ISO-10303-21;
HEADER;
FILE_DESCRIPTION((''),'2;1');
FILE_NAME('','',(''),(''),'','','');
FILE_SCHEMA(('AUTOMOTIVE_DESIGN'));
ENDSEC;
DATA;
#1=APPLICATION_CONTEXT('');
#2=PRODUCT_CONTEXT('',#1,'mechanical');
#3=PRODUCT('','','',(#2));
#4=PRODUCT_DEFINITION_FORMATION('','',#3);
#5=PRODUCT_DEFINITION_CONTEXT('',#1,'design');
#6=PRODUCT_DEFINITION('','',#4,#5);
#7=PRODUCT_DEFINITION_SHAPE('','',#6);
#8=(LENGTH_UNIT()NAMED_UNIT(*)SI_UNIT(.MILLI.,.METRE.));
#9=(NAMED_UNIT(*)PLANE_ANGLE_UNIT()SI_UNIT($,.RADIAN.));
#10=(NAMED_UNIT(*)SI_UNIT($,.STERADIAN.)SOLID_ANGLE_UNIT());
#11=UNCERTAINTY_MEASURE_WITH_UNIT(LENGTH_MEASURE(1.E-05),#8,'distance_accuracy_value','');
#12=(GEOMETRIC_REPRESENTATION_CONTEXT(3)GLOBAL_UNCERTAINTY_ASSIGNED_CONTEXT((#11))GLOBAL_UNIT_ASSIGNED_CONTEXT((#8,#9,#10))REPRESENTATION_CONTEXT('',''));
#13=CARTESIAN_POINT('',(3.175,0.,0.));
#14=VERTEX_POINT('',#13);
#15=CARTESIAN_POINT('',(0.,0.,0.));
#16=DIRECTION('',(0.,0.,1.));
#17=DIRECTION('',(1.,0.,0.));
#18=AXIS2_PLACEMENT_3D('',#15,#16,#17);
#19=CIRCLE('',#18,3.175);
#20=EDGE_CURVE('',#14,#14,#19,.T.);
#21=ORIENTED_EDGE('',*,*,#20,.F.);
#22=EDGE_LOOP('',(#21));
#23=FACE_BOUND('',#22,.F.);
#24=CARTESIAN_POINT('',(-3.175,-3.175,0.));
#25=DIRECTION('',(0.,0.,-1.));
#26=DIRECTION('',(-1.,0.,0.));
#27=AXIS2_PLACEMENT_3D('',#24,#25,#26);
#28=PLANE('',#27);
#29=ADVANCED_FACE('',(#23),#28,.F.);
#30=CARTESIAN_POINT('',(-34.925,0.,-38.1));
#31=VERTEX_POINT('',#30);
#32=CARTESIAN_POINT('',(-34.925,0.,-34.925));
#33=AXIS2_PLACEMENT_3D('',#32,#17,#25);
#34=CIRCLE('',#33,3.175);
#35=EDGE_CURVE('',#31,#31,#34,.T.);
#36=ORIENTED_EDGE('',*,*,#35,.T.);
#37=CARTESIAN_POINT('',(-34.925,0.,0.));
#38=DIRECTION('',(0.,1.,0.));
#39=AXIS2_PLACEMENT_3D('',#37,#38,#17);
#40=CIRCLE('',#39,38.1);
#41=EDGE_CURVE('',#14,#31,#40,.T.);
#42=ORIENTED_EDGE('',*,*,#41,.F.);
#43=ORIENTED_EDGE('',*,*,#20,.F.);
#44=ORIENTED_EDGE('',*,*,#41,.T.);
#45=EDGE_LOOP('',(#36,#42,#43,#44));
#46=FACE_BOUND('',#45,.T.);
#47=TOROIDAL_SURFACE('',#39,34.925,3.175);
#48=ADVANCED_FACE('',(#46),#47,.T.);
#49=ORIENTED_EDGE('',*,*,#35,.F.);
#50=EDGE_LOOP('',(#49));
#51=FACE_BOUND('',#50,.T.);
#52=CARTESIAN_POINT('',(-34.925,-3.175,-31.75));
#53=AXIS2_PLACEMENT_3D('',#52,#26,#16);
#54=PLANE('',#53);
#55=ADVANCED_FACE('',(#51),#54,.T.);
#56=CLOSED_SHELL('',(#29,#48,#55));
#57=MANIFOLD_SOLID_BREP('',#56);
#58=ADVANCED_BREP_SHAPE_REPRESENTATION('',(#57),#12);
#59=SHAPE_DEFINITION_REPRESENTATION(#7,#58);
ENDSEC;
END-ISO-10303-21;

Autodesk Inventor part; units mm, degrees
ref_plane "XY Plane" through (0, 0, 0) normal (0, 0, 1) x (1, 0, 0)
sketch "Sketch2" plane through (0, 0, 0) normal (0, 0, 1) x (1, 0, 0)
  circle A0 centre (0, 0) radius 3.175
extrude "Extrusion1" add sketch "Sketch2" against normal blind 49.8728
ref_plane "Work Plane1" through (-3.175, 0, 0) normal (1, 0, 0) x (0, 1, 0)
sketch "Sketch3" plane through (-3.175, 0, 0) normal (1, 0, 0) x (0, 1, 0)
  line L0 (-3.175, -49.8728) -> (3.175, -49.8728) projected
  line L1 (-3.175, 0) -> (3.175, 0) projected
  point P0 (0, 0)
bend part "Bend Part1" radius 31.75 angle 90 line through (-3.175, -3.175, 0) along (0, 1, 0) centre toward (-1, 0, 0) moving side (0, 0, -1) both sides no
equation "\"d1\" = Arc_Length"
equation "\"Arc_Length\" = 49.87278"
equation "\"Cable_Rad\" = 3.175"
properties part number "Cable"
